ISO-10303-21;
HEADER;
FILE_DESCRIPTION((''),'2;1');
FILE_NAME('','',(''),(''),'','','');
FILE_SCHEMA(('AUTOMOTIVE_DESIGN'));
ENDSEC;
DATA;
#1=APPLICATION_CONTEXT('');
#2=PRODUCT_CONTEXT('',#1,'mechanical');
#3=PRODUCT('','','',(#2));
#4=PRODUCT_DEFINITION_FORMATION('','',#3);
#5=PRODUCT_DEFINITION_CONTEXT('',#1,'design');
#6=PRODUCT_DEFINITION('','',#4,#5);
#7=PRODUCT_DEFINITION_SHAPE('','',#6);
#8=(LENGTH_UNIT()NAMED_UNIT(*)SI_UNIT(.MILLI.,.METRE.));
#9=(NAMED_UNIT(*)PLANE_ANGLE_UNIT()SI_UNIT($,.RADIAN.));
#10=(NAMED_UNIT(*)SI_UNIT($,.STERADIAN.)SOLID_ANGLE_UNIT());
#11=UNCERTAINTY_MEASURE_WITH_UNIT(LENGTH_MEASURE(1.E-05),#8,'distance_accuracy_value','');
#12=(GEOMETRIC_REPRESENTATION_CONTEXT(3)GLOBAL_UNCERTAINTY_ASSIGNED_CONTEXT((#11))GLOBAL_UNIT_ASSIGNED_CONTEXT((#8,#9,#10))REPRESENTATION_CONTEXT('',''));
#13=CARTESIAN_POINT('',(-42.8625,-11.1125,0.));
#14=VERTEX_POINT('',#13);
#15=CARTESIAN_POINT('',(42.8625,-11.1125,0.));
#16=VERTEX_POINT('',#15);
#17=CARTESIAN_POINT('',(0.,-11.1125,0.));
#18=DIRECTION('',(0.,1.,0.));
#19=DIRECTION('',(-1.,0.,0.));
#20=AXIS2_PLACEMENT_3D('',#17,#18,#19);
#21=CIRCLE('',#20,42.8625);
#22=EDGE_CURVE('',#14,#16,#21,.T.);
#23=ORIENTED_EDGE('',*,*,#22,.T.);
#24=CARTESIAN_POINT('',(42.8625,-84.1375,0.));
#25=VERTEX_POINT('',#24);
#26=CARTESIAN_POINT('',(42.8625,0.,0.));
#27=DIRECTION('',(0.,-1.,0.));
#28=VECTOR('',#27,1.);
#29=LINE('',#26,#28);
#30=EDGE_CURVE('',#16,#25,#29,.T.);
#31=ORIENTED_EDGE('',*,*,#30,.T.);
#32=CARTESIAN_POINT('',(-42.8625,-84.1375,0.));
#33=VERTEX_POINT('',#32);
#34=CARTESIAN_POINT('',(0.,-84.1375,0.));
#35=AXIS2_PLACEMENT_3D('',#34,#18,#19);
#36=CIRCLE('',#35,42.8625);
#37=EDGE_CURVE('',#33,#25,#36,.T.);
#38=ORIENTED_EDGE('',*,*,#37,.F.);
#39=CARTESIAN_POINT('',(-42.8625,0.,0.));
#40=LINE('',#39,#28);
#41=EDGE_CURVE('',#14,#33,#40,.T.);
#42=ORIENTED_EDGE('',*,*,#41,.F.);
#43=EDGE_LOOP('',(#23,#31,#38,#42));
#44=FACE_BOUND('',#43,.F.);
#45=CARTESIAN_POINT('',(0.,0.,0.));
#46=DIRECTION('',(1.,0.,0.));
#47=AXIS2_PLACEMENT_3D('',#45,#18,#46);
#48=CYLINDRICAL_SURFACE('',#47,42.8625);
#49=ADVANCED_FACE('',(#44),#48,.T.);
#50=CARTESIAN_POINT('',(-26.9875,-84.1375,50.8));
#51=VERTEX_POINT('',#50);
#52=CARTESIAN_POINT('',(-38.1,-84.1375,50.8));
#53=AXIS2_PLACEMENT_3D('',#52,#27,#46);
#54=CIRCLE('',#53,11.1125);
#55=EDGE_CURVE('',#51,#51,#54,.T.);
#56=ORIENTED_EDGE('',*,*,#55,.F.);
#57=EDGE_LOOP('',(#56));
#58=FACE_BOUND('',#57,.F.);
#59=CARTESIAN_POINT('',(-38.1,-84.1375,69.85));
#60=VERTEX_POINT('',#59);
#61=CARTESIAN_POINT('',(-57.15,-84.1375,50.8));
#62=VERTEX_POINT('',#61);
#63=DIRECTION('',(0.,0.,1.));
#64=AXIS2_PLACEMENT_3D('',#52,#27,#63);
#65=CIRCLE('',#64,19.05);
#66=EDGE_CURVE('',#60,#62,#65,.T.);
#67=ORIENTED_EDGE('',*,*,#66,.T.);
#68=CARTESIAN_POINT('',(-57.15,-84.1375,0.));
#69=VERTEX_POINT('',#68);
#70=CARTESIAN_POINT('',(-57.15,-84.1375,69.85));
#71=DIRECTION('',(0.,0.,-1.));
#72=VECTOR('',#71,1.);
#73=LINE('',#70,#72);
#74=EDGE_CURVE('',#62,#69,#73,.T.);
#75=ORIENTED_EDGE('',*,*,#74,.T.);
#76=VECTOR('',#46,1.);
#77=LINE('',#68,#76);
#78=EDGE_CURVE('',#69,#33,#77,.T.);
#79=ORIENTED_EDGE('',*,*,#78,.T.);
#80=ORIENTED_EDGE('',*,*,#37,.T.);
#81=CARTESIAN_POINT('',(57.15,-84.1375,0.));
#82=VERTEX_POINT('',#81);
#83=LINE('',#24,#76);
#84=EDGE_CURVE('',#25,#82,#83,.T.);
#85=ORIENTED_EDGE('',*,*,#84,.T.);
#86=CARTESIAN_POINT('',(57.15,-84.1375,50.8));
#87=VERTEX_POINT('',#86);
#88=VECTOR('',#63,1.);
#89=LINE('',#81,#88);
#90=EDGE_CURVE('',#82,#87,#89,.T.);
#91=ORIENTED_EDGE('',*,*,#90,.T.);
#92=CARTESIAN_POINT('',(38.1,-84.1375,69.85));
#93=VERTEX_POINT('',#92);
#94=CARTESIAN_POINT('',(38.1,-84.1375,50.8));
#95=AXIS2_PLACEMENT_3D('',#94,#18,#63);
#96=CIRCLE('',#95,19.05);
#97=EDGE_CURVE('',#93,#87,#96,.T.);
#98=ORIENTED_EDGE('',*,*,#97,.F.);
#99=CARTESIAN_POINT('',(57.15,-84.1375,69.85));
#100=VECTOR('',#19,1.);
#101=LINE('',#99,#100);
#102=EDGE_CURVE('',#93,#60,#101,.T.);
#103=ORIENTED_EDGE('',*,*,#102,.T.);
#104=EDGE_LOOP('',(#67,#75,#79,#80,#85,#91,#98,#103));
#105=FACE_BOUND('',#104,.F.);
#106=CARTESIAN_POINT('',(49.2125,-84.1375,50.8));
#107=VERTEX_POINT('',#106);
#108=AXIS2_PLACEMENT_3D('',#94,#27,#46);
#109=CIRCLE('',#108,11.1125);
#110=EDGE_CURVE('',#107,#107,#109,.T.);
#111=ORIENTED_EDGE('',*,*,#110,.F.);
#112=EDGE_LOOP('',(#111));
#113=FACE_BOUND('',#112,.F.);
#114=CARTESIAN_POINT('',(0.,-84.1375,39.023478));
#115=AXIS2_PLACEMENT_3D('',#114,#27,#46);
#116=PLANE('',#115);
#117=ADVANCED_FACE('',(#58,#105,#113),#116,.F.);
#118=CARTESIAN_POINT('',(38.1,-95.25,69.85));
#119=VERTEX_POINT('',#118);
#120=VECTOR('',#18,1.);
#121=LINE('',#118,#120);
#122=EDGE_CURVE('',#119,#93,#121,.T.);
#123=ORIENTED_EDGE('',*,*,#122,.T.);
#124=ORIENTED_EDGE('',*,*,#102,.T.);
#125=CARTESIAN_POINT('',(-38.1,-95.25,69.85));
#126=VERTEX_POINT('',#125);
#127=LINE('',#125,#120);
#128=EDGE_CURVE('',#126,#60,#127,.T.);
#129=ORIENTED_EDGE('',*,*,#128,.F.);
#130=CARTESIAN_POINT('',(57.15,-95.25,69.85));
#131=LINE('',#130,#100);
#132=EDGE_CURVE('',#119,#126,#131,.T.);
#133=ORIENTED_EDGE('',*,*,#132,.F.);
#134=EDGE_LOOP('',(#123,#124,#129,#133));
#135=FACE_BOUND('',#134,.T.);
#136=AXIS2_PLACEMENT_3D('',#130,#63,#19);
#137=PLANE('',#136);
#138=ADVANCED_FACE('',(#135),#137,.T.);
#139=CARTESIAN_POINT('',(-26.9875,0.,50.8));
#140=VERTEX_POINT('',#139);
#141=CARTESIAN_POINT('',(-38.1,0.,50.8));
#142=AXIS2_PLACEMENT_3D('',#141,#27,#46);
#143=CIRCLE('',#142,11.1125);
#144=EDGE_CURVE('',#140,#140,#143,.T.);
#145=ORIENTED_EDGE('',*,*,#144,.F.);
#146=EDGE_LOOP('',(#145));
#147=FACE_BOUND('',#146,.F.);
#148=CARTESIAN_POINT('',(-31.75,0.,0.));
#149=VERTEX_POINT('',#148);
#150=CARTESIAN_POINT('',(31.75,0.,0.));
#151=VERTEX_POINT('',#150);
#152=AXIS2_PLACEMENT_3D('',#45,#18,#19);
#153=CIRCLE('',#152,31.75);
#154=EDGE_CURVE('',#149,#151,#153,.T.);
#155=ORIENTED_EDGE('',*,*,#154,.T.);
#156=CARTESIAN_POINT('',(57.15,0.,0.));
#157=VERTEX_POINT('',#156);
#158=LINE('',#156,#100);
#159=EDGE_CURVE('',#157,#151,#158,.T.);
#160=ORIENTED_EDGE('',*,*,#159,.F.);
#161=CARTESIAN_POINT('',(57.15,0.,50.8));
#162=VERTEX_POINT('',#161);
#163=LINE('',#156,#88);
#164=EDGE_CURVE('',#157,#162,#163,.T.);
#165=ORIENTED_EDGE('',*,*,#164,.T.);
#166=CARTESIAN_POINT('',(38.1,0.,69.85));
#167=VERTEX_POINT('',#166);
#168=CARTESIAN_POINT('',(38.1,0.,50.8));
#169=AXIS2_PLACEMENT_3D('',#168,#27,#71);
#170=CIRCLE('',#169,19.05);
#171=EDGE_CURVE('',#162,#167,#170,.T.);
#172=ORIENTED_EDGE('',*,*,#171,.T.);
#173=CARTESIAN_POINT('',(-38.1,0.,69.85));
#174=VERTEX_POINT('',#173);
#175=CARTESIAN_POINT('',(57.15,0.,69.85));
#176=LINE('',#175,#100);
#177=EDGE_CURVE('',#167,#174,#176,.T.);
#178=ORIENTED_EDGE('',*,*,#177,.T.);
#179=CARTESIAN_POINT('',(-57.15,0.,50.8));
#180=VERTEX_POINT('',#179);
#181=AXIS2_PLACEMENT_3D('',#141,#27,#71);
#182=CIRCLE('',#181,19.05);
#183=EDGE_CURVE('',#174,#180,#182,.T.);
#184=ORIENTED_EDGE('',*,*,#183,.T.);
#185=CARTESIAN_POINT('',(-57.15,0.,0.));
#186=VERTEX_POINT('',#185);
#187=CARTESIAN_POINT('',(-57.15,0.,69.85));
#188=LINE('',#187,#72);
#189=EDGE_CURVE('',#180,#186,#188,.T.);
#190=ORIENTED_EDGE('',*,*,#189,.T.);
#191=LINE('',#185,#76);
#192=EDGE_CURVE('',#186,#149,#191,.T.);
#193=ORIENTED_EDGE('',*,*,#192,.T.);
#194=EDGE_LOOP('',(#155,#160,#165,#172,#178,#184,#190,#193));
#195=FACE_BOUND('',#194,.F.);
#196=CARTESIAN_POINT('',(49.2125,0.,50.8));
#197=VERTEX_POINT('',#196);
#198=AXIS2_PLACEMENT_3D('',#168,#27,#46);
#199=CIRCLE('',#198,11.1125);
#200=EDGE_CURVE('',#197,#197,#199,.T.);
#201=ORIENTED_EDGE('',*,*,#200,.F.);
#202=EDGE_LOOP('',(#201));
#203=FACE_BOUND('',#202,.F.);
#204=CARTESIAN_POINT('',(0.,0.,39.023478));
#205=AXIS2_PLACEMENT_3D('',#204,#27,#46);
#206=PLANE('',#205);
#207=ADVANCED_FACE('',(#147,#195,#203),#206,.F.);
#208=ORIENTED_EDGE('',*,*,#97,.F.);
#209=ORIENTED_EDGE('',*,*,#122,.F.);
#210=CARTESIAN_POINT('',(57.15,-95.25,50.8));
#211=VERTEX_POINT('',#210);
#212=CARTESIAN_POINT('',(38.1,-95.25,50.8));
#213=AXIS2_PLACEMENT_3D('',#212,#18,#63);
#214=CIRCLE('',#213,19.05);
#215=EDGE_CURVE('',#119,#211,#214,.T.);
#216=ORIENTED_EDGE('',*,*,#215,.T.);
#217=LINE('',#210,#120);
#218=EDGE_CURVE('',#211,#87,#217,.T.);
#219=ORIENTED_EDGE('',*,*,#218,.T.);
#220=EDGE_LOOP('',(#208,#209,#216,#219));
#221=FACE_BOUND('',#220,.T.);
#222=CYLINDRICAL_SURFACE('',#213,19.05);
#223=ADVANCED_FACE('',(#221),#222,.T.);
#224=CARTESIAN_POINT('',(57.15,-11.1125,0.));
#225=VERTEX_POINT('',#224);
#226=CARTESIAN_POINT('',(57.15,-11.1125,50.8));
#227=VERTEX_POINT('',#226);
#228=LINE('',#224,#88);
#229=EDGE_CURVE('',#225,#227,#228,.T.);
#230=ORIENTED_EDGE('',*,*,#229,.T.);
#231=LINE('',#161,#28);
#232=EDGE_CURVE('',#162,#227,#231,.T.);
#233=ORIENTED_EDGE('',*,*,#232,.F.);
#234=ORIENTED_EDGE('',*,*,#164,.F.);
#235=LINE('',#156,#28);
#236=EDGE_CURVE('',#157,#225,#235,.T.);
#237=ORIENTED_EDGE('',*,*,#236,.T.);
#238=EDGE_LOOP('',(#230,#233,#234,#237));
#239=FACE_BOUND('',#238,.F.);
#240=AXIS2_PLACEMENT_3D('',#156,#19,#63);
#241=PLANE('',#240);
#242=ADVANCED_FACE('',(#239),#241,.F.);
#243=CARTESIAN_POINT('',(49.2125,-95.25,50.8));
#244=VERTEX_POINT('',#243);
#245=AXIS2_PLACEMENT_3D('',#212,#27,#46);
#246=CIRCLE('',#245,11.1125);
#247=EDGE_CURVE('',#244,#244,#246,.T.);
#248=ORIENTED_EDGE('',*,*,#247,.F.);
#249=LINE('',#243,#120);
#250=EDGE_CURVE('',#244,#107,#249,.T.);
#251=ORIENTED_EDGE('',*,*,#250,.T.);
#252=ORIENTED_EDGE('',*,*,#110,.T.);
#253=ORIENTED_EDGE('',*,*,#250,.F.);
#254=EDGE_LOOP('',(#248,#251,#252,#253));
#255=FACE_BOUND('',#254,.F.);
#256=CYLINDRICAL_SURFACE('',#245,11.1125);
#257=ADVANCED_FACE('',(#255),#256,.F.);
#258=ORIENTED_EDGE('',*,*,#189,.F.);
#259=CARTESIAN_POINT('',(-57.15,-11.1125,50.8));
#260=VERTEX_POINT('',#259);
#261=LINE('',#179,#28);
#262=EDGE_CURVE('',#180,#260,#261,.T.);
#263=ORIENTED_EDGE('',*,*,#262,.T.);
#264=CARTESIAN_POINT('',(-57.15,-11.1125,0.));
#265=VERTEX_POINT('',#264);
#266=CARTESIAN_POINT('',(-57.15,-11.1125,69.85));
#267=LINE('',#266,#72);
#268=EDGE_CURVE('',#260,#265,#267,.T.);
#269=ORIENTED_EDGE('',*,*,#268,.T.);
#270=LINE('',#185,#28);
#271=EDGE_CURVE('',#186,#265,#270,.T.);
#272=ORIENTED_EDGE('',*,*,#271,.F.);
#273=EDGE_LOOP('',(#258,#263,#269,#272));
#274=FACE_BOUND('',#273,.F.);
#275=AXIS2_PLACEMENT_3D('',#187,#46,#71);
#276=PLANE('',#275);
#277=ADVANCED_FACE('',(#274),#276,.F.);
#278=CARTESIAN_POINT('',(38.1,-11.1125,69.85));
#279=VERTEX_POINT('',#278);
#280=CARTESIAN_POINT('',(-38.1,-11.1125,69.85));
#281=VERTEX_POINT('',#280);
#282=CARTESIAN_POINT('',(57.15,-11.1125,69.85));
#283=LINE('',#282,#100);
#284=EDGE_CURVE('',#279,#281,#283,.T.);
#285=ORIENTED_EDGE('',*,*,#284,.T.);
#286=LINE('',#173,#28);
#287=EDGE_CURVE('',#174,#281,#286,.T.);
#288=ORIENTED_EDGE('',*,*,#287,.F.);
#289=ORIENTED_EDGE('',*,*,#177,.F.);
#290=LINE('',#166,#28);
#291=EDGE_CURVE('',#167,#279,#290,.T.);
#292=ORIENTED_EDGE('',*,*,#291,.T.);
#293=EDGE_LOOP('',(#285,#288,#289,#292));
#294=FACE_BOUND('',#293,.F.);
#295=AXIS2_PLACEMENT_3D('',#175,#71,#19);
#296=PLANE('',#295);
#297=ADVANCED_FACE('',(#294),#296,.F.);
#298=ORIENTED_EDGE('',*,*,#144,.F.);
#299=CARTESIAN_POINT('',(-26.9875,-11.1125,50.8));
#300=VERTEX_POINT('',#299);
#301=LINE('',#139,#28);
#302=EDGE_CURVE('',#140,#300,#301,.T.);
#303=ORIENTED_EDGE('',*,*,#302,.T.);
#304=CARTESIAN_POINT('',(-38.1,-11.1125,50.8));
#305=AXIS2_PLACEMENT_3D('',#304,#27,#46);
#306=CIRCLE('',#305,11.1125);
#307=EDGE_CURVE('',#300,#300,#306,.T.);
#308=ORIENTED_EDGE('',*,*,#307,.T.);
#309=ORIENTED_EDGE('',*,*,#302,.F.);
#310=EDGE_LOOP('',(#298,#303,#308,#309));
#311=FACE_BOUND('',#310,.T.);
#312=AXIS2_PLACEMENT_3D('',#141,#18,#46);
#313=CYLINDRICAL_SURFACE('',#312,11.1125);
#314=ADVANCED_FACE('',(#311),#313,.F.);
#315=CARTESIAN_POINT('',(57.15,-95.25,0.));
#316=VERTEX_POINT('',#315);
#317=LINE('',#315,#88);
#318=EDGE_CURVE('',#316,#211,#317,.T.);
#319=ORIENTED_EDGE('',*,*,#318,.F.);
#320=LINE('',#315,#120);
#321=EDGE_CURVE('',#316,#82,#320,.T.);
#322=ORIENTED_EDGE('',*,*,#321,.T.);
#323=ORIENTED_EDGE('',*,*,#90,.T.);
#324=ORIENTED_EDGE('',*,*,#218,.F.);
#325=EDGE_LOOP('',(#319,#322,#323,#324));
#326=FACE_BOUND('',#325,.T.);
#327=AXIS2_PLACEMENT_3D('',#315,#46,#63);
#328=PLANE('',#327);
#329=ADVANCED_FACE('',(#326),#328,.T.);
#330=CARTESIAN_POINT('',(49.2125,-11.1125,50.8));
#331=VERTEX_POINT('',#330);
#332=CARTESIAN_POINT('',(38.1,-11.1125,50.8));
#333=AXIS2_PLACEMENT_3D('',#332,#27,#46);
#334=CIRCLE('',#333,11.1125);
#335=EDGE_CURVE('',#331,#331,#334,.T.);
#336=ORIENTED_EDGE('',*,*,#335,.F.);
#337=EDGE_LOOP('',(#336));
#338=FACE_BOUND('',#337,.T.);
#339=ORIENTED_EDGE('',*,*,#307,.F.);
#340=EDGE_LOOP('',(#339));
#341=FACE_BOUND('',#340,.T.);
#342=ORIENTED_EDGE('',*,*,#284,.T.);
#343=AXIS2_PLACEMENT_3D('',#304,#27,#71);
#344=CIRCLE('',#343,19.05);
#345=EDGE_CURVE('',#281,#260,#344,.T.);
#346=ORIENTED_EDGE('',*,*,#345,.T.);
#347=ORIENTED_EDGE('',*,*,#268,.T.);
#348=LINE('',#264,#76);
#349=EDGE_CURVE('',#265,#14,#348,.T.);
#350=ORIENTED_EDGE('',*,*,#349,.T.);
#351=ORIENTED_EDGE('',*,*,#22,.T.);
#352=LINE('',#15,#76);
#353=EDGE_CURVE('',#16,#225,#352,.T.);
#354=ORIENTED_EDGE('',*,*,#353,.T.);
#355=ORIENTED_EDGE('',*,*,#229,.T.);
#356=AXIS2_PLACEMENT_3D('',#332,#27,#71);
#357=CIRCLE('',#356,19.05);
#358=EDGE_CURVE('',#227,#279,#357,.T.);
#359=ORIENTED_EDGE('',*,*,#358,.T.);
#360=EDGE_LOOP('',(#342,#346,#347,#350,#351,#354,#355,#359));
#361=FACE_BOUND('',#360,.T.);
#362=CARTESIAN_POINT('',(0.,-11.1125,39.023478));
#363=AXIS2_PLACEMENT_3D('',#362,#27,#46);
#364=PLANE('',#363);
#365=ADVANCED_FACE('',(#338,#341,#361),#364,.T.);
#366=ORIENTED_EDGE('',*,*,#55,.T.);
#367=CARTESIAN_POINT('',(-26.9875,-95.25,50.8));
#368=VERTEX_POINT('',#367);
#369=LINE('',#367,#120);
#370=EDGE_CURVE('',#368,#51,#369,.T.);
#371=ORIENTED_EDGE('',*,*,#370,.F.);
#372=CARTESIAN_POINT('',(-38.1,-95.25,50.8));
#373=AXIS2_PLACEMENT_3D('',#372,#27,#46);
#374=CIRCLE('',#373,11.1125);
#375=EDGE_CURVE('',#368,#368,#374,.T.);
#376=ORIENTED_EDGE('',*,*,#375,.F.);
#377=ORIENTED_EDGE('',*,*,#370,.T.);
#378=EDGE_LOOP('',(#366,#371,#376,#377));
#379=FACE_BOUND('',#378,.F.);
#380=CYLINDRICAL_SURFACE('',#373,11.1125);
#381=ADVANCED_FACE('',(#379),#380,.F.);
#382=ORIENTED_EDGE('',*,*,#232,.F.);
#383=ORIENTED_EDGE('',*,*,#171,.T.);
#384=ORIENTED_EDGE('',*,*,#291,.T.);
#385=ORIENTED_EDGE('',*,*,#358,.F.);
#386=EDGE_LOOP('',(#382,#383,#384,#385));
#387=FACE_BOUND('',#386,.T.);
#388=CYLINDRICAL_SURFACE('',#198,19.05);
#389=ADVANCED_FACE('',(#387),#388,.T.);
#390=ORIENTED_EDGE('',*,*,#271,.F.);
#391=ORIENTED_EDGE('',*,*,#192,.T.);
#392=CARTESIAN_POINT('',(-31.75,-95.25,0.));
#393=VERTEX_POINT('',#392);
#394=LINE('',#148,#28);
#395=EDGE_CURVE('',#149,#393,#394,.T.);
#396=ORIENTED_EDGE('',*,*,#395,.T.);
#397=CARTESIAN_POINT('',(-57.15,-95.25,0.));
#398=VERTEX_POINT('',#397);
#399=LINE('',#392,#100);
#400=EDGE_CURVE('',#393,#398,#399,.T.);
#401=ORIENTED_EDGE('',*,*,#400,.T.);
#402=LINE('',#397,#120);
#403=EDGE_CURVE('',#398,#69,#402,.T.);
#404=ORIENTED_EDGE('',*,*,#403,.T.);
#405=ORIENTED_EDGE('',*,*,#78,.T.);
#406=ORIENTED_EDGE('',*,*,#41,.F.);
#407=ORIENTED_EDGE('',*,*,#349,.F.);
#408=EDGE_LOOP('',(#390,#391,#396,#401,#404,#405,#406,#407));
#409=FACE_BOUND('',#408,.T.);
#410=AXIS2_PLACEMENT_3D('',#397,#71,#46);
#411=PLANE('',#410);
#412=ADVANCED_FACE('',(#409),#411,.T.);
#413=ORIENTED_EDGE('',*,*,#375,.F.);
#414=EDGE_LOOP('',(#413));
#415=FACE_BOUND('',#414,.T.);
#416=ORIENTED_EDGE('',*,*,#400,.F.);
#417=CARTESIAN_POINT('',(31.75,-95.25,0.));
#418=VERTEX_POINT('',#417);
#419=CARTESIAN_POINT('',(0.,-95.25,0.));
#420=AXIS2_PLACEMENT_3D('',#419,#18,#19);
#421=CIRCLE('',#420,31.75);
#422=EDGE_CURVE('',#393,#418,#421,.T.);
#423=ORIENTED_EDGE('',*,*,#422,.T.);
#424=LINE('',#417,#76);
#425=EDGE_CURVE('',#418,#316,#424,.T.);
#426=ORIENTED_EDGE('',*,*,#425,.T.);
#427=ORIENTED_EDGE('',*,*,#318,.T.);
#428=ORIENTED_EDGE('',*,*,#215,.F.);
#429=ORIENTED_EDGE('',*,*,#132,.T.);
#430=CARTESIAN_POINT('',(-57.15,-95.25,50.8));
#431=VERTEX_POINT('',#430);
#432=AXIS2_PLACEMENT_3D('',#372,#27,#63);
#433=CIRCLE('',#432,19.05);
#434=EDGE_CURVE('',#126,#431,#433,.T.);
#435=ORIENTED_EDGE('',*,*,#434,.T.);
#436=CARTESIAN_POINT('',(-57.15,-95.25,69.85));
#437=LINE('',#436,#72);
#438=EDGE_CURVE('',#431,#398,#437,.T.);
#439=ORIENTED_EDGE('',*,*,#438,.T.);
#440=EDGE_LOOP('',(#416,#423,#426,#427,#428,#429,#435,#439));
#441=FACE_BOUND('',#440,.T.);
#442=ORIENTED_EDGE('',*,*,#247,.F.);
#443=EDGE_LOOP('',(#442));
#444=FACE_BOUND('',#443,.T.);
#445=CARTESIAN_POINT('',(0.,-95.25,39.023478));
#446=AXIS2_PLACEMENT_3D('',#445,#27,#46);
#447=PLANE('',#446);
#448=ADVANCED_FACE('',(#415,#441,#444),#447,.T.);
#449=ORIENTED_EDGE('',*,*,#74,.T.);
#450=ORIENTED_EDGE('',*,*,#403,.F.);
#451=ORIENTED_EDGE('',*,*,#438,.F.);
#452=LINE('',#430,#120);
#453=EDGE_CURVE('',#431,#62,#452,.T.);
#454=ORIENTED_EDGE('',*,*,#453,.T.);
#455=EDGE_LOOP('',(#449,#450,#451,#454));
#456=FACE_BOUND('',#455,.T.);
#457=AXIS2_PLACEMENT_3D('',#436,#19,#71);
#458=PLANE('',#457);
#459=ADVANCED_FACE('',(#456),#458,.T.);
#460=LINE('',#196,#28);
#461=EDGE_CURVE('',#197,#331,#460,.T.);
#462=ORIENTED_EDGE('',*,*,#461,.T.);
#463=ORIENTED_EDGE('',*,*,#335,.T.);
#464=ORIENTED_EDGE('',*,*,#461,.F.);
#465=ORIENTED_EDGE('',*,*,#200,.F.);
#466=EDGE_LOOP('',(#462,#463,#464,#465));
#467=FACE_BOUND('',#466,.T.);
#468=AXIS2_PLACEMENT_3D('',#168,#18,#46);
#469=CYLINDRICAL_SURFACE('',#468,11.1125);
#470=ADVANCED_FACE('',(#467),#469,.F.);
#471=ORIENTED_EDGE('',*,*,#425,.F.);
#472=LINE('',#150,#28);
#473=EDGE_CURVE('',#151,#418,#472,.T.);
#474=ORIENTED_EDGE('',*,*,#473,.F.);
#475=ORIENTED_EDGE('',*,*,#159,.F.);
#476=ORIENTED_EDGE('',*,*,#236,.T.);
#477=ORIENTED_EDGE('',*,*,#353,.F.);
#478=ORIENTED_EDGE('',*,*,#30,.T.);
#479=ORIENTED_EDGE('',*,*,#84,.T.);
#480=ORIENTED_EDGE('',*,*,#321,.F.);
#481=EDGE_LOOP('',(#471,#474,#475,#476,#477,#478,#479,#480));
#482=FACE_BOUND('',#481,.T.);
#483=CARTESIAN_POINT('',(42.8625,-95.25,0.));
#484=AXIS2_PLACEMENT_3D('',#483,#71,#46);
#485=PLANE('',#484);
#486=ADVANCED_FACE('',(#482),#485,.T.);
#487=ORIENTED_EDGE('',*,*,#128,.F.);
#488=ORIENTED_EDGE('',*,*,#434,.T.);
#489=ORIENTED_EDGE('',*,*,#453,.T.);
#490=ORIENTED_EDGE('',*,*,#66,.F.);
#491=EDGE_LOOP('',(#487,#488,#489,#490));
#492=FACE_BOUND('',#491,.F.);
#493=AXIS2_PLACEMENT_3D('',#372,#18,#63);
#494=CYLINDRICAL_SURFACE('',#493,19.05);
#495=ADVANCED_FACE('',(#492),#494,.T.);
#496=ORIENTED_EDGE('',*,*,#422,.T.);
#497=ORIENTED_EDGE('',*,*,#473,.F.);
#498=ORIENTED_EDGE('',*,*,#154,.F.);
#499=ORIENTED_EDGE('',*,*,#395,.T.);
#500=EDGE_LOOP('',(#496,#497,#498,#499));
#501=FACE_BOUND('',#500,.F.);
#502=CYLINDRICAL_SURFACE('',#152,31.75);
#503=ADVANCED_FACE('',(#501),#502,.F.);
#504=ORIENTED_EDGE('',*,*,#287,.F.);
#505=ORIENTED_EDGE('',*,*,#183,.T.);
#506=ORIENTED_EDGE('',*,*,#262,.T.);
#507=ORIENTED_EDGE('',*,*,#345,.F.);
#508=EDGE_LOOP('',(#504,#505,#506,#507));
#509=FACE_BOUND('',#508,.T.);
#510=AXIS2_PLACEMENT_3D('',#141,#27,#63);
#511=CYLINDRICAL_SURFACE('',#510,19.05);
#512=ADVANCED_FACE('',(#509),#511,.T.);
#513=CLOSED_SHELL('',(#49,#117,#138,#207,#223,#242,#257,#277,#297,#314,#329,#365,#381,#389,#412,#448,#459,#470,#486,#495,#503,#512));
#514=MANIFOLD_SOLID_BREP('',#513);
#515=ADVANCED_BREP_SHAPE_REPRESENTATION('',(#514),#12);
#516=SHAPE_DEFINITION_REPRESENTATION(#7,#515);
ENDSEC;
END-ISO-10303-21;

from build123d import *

# Parameters (mm, degrees)
F1_DEPTH = 95.25
F0_R     = 11.1125
F2_DEPTH = 11.1125
F3_R     = 11.1125
F4_DEPTH = 11.1125
F5_R     = 19.05


with BuildPart() as f1:
    # F0 (on Front) → F1 (new body)
    with BuildSketch(Plane.XZ):
        with BuildLine():
            Line((31.75, 0), (42.8625, 0))
            ThreePointArc((42.8625, 0), (0, 42.8625), (-42.8625, 0))
            Line((-42.8625, 0), (-31.75, 0))
            ThreePointArc((-31.75, 0), (0, 31.75), (31.75, 0))
        make_face()
    extrude(amount=F1_DEPTH)

    # F0 (on Front) → F2 (join)
    with BuildSketch(Plane.XZ):
        with BuildLine():
            ThreePointArc((-42.8625, 0), (0, 42.8625), (42.8625, 0))
            Line((42.8625, 0), (57.15, 0))
            Line((57.15, 0), (57.15, 69.85))
            Line((57.15, 69.85), (-57.15, 69.85))
            Line((-57.15, 69.85), (-57.15, 0))
            Line((-57.15, 0), (-42.8625, 0))
        make_face()
        with Locations((-38.1, 50.8)):
            Circle(F0_R, mode=Mode.SUBTRACT)
        with Locations((38.1, 50.8)):
            Circle(F0_R, mode=Mode.SUBTRACT)
    extrude(amount=F2_DEPTH)

    # F3 (on face) → F4 (join)
    with BuildSketch(Plane.XZ.offset(95.25)):
        with BuildLine():
            ThreePointArc((-42.8625, 0), (0, 42.8625), (42.8625, 0))
            Line((42.8625, 0), (57.15, 0))
            Line((57.15, 0), (57.15, 69.85))
            Line((57.15, 69.85), (-57.15, 69.85))
            Line((-57.15, 69.85), (-57.15, 0))
            Line((-57.15, 0), (-42.8625, 0))
        make_face()
        with Locations((-38.1, 50.8)):
            Circle(F3_R, mode=Mode.SUBTRACT)
        with Locations((38.1, 50.8)):
            Circle(F3_R, mode=Mode.SUBTRACT)
    extrude(amount=-F4_DEPTH)

    # F5
    f5_edges = [f1.edges().sort_by_distance(p)[0] for p in [
        (57.15, -89.69375, 69.85),
        (-57.15, -5.55625, 69.85),
        (-57.15, -89.69375, 69.85),
        (57.15, -5.55625, 69.85),
    ]]
    fillet(f5_edges, radius=F5_R)


solid = f1.part
